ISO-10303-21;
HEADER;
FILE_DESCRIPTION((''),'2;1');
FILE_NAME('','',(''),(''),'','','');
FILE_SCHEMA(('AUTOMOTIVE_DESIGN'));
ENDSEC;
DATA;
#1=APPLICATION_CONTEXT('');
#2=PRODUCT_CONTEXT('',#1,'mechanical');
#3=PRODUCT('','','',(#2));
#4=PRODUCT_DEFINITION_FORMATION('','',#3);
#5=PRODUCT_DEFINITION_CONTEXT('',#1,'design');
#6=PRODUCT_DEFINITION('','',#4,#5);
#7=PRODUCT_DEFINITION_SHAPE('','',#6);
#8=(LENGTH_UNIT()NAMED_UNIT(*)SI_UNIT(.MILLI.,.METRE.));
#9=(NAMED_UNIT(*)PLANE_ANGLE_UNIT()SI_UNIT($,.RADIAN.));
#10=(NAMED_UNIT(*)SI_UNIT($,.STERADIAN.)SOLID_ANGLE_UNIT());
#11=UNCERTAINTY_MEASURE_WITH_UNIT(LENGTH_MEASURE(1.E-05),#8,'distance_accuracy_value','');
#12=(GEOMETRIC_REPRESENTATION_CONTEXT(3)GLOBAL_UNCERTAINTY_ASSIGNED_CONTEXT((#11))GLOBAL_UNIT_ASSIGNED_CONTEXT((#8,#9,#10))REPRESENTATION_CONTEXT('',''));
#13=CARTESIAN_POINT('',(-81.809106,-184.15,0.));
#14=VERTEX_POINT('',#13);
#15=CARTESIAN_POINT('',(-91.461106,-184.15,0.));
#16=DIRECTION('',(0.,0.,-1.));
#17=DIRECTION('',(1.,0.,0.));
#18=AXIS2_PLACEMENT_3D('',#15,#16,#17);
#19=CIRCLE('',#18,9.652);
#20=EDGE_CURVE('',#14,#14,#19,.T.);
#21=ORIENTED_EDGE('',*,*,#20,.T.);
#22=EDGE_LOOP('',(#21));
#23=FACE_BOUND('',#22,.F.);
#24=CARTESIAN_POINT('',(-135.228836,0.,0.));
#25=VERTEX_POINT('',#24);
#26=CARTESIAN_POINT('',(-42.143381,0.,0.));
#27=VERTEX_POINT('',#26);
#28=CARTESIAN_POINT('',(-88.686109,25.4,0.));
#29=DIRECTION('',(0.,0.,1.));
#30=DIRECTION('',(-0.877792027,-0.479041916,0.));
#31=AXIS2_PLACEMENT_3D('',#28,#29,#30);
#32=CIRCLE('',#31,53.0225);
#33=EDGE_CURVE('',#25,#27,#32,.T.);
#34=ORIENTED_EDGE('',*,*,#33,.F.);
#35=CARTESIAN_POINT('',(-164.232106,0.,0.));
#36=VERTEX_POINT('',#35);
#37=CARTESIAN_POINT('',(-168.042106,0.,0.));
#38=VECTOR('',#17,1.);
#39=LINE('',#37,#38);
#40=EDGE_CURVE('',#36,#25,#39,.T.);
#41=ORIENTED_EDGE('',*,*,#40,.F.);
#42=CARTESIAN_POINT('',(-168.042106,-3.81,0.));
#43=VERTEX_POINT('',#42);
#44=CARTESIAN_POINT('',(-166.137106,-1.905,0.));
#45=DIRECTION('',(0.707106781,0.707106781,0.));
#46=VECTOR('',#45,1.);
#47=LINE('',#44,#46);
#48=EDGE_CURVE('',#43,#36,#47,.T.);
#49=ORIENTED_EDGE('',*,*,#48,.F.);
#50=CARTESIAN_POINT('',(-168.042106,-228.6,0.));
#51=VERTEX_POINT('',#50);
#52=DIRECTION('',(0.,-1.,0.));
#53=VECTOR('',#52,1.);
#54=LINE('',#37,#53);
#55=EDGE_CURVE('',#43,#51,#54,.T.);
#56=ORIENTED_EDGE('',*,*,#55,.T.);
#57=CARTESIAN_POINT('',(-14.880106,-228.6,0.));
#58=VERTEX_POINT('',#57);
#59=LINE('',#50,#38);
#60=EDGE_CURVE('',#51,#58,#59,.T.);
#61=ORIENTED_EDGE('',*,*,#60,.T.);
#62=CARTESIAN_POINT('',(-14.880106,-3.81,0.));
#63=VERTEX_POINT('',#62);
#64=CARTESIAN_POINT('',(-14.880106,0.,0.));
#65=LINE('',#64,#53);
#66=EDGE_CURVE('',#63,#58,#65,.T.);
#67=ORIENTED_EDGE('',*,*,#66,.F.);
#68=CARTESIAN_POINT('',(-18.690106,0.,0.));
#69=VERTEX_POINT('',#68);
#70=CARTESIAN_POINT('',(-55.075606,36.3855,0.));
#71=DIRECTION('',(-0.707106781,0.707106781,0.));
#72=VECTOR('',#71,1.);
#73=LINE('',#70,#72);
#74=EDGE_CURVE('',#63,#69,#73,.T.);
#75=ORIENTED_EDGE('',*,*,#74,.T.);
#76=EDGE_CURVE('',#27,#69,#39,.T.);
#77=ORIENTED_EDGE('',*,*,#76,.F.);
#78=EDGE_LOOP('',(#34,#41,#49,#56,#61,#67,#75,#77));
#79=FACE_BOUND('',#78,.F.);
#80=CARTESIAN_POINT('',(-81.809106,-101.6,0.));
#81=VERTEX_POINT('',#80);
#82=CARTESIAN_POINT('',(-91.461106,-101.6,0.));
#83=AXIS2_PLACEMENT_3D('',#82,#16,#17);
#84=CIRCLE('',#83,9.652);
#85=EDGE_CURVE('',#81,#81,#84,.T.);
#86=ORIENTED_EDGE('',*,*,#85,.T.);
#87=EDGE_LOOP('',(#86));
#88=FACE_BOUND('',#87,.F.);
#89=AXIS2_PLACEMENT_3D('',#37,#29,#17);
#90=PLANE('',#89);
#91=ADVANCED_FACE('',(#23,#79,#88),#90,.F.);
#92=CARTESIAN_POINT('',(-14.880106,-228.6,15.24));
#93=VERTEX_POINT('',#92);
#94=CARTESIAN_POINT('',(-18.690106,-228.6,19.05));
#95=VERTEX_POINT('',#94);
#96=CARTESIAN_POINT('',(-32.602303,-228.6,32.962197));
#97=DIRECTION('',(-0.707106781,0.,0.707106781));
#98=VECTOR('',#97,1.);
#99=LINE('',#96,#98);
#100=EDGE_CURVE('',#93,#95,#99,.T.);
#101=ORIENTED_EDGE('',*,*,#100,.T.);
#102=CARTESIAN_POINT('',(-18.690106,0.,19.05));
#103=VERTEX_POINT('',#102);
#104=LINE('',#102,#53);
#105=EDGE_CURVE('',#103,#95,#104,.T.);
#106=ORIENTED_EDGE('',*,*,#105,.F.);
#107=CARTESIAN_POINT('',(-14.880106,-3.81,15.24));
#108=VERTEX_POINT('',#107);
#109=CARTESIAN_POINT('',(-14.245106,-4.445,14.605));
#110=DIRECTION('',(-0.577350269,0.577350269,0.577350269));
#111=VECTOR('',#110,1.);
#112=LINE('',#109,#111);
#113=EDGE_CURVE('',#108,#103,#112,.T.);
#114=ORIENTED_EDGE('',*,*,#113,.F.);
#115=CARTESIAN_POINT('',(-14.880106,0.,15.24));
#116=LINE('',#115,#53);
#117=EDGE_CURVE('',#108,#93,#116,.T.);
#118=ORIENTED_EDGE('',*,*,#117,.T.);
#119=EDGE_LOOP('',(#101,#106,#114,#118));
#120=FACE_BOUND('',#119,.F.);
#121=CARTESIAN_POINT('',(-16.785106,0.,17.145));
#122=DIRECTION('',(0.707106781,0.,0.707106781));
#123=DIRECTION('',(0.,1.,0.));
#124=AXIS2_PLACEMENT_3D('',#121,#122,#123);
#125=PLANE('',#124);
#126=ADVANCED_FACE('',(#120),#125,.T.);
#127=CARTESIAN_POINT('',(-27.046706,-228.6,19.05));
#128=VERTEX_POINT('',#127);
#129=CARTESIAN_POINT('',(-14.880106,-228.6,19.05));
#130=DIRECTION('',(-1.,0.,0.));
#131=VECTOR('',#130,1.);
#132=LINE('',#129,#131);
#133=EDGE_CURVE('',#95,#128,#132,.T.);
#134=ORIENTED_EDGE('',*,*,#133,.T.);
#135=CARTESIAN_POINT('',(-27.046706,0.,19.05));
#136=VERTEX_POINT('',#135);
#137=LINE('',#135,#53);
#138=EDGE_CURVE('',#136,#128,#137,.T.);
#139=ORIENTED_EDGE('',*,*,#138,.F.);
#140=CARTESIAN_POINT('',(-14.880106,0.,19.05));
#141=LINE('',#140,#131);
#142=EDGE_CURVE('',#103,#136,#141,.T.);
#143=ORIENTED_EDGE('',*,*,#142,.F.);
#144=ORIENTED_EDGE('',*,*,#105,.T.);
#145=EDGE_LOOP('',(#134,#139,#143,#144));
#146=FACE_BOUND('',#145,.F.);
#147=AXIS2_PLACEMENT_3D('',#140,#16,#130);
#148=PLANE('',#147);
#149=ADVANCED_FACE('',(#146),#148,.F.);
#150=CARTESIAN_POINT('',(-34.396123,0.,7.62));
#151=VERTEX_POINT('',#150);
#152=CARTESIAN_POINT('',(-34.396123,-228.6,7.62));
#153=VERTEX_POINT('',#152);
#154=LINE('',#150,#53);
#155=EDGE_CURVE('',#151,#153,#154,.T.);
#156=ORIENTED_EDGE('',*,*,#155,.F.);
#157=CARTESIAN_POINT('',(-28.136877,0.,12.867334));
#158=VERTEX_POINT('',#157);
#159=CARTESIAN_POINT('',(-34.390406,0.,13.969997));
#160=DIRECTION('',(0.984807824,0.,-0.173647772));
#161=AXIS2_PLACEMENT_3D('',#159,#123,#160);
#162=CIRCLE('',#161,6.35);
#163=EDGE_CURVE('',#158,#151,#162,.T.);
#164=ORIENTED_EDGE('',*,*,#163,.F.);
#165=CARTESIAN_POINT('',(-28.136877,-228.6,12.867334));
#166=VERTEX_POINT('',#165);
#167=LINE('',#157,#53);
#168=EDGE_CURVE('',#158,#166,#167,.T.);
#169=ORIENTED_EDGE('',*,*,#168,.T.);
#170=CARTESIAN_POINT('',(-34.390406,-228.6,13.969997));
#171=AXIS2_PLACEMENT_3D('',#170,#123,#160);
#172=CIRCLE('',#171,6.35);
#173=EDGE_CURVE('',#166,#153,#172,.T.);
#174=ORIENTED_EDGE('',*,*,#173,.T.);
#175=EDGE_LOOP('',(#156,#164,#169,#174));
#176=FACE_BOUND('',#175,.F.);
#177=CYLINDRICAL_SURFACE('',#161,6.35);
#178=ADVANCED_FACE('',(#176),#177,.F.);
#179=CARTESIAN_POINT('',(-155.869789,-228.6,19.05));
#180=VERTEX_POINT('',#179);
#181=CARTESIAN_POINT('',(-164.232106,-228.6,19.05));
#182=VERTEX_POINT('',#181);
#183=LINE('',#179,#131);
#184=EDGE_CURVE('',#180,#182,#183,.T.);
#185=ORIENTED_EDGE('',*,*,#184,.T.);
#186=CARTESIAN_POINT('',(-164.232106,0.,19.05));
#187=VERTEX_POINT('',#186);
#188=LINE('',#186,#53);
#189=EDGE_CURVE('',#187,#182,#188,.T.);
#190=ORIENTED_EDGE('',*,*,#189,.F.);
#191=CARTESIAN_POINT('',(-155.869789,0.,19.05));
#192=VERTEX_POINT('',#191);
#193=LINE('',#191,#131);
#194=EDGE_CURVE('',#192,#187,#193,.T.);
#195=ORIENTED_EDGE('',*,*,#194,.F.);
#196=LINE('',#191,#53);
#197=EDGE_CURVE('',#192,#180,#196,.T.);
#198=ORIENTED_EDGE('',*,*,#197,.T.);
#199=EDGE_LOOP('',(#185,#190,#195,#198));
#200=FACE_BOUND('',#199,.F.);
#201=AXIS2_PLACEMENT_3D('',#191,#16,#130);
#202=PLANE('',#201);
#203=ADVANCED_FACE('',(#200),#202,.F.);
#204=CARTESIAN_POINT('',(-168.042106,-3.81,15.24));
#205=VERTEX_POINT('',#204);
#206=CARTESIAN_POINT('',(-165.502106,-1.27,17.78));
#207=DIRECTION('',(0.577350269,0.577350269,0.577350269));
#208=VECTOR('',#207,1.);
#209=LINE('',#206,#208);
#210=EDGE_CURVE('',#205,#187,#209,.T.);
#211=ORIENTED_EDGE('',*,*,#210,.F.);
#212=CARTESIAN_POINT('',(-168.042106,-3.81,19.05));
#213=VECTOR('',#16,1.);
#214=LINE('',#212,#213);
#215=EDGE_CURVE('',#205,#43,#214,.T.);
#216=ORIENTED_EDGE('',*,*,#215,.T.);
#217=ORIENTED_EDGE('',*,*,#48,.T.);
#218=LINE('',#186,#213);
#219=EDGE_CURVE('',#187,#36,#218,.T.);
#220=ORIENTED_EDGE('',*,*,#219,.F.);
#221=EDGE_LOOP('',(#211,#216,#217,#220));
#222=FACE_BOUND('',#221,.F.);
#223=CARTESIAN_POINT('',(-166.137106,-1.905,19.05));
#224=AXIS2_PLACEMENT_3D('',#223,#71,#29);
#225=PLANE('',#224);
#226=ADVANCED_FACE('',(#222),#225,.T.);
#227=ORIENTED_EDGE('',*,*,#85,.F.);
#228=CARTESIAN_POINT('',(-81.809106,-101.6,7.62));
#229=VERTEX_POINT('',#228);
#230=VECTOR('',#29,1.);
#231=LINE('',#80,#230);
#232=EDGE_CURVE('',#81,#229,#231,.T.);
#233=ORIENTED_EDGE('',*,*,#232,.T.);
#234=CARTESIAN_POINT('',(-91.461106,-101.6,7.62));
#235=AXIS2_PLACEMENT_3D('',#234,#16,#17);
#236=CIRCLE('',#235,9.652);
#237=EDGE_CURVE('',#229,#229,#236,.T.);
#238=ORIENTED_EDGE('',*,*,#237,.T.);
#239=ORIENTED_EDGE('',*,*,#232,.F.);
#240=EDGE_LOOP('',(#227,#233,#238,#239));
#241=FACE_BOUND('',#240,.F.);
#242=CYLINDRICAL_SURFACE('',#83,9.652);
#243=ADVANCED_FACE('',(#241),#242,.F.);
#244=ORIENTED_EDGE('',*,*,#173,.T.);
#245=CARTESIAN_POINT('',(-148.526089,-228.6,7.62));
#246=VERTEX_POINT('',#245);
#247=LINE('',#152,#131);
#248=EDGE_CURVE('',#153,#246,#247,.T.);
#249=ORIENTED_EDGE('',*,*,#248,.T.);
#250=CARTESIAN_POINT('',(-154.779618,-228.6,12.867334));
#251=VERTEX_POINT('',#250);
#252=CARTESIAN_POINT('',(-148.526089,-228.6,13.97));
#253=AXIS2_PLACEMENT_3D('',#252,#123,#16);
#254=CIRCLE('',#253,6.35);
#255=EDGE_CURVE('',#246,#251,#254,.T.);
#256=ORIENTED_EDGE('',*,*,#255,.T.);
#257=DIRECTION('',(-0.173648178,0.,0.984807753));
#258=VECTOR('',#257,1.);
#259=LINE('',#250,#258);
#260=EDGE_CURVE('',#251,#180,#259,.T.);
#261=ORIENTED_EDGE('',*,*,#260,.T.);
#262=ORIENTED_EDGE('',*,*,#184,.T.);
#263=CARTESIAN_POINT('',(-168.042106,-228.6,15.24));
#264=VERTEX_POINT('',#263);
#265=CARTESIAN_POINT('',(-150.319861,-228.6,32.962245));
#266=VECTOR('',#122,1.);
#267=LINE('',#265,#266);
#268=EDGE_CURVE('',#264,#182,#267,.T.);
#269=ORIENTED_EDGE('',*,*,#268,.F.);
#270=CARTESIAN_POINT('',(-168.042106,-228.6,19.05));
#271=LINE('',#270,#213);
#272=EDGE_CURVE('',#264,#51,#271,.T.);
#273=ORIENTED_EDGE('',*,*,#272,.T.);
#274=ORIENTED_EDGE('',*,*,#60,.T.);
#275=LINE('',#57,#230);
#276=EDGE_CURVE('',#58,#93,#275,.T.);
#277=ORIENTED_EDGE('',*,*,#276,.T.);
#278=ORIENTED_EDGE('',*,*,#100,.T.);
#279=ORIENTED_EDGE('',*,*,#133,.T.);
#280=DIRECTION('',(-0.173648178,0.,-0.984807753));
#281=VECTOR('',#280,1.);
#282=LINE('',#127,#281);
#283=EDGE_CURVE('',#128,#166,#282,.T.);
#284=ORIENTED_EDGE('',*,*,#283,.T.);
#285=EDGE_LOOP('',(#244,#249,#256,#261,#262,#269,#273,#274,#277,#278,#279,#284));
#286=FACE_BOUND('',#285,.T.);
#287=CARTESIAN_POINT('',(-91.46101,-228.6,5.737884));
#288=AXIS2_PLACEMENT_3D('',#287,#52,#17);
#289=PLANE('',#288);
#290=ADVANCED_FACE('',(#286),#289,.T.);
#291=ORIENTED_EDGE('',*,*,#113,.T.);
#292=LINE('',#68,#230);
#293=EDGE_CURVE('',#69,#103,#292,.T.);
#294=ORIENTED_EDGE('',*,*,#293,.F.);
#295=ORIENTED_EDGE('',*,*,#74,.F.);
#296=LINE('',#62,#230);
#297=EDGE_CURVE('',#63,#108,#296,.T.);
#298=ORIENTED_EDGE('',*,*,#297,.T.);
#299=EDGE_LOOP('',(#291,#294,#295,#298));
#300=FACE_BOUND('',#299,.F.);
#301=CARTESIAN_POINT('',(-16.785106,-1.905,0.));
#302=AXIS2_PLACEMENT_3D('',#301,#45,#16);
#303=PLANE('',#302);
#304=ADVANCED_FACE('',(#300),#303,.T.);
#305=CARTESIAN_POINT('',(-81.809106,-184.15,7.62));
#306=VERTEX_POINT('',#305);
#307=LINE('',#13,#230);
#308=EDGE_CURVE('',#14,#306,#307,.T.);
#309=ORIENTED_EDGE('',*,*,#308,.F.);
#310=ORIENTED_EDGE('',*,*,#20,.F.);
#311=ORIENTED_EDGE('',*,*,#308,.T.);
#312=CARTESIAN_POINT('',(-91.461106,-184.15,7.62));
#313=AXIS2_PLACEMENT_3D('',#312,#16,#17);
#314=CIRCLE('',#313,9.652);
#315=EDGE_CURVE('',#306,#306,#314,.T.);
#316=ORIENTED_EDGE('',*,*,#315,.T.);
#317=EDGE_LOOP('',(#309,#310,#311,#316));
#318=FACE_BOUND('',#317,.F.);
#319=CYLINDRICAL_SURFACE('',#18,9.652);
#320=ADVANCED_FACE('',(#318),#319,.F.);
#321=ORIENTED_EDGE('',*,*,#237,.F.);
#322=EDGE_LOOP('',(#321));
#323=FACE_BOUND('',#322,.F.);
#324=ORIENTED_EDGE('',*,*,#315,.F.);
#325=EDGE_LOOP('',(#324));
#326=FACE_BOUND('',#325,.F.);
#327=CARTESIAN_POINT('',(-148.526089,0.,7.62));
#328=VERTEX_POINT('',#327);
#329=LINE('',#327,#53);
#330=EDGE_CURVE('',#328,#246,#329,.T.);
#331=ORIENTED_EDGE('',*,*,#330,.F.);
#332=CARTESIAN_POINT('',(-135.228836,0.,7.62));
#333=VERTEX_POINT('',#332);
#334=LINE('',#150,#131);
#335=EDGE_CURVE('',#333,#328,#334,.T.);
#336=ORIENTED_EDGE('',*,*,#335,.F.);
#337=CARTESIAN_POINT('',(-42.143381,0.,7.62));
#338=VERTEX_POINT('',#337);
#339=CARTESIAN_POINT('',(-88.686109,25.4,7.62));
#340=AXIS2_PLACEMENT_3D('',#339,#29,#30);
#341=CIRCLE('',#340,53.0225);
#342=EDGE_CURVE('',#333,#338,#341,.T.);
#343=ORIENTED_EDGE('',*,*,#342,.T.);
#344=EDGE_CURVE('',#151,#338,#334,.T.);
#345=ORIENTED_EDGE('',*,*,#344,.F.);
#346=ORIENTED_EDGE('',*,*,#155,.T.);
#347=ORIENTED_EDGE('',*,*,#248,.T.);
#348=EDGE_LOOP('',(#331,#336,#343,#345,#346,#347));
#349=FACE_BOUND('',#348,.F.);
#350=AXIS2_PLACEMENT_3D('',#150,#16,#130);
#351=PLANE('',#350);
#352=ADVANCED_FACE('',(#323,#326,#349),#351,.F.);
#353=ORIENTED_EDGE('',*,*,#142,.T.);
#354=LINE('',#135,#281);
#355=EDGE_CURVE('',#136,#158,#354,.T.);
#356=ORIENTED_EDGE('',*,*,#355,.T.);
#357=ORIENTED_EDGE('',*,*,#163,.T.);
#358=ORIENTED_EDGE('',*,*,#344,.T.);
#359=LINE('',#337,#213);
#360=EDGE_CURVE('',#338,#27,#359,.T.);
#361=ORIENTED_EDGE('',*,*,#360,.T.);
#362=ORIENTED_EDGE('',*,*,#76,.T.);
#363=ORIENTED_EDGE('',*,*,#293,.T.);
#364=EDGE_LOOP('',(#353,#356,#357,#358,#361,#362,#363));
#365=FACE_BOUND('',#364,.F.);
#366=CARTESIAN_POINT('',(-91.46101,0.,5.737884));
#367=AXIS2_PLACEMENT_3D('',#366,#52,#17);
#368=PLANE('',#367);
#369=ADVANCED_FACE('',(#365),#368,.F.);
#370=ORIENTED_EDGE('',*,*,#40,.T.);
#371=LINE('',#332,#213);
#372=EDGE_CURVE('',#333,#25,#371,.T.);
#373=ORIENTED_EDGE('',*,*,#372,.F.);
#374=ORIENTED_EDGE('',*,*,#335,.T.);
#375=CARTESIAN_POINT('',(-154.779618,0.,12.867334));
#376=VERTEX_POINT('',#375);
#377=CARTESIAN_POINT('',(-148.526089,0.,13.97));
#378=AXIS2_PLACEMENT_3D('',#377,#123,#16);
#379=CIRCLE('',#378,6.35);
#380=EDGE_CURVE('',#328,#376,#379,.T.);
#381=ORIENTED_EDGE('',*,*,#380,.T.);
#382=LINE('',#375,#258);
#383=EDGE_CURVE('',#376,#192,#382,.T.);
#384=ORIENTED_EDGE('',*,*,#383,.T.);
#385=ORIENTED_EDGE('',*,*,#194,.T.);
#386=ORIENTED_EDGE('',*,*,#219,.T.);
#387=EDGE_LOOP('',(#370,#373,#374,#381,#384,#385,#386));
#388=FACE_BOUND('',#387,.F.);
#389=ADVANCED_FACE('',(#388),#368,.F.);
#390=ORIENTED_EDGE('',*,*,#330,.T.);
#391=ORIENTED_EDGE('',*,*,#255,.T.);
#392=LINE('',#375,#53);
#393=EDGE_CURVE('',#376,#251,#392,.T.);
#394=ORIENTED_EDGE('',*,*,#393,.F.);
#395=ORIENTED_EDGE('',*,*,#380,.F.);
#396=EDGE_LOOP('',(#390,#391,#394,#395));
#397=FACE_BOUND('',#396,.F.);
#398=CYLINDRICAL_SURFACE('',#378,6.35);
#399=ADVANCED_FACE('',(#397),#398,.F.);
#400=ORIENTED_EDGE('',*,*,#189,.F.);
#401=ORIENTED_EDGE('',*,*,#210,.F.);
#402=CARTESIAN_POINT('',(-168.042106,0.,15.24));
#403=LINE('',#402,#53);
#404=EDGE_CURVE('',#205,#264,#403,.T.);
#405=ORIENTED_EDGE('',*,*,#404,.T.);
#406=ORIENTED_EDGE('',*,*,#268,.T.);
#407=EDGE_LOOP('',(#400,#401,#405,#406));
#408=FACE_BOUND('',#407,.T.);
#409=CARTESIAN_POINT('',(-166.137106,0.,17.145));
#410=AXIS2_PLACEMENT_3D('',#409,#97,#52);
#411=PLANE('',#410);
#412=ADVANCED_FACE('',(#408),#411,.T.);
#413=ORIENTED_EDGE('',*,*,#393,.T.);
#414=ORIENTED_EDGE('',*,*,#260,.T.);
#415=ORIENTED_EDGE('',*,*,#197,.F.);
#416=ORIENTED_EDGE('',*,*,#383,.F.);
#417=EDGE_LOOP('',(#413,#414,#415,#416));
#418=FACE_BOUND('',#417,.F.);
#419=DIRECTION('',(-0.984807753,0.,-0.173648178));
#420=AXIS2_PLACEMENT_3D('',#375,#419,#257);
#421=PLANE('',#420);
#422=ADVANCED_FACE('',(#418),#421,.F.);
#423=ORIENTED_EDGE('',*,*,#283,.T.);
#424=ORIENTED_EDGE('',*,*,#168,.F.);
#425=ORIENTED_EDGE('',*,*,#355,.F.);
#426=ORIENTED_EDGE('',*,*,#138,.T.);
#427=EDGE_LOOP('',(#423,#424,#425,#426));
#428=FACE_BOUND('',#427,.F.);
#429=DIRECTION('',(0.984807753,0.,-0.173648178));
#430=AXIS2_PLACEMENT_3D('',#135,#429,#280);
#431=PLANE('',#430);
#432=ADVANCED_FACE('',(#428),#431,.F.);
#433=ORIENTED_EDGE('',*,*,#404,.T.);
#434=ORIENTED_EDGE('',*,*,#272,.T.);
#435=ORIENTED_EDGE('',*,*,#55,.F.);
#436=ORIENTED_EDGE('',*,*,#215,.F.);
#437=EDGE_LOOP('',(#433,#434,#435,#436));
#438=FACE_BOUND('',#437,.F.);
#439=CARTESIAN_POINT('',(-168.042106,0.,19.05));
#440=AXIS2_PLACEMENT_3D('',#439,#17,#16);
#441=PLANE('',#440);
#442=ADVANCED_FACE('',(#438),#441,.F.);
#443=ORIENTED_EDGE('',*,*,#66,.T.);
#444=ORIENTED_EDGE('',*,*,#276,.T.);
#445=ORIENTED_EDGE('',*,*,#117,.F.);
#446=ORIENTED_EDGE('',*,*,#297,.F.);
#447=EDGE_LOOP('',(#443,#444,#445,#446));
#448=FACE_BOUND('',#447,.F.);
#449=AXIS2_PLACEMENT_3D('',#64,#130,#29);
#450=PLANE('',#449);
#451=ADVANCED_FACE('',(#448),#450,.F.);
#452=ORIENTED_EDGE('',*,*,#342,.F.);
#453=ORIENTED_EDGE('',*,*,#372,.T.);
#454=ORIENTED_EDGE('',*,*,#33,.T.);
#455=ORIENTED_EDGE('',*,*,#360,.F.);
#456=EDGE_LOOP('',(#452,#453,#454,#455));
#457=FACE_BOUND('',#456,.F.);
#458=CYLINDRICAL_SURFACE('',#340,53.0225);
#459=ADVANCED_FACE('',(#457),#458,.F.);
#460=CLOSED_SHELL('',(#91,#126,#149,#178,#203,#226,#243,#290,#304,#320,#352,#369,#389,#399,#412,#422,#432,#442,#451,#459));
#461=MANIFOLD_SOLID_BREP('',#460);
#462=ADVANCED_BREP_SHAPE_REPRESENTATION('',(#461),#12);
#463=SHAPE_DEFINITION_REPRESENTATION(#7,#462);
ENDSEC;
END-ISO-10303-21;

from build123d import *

# Parameters (mm, degrees)
F1_DEPTH = 228.6
F2_SIZE  = 3.81
F4_DEPTH = 25.4
F5_R     = 9.652
F6_DEPTH = 25.4


# Not quite as in the source:
# - a feature names something its author has since deleted; it is built from what else it names


with BuildPart() as f1:
    # F0 (on Front) → F1 (new body)
    with BuildSketch(Plane.XZ):
        with BuildLine():
            Line((-168.0421057219, 19.05), (-168.0421057219, 0))
            Line((-168.0421057219, 0), (-14.8801057219, 0))
            Line((-14.8801057219, 0), (-14.8801057219, 19.05))
            Line((-14.8801057219, 19.05), (-27.0467057219, 19.05))
            Line((-27.0467057219, 19.05), (-28.1368765378, 12.8673340718))
            ThreePointArc((-28.1368765378, 12.8673340718), (-30.3108938413, 9.1037793136), (-34.3961226724, 7.62))
            Line((-34.3961226724, 7.62), (-91.4611057219, 7.62))
            Line((-91.4611057219, 7.62), (-148.5260887714, 7.62))
            ThreePointArc((-148.5260887714, 7.62), (-152.6077900929, 9.1056177862), (-154.7796180031, 12.8673340718))
            Line((-154.7796180031, 12.8673340718), (-155.8697888189, 19.05))
            Line((-155.8697888189, 19.05), (-168.0421057219, 19.05))
        make_face()
    extrude(amount=F1_DEPTH)

    # F2
    f2_edges = [f1.edges().sort_by_distance(p)[0] for p in [
        (-168.042106, -114.3, 19.05),
        (-14.880106, -114.3, 19.05),
        (-14.880106, 0, 9.525),
        (-168.042106, 0, 9.525),
    ]]
    chamfer(f2_edges, length=F2_SIZE)

    # F3 (on face) → F4 (cut)
    with BuildSketch(Plane.XY.offset(7.62)):
        with BuildLine():
            Line((-42.1433808409, 0), (-135.2288363374, 0))
            ThreePointArc((-135.2288363374, 0), (-88.6861085892, -27.6225), (-42.1433808409, 0))
        make_face()
    extrude(amount=-F4_DEPTH, mode=Mode.SUBTRACT)

    # F5 (on face) → F6 (cut)
    with BuildSketch(Plane(origin=(0, 0, 0), x_dir=(1, 0, 0), z_dir=(0, 0, -1))):
        with Locations((-91.4611057219, 101.6)):
            Circle(F5_R)
        with Locations((-91.4611057219, 184.15)):
            Circle(F5_R)
    extrude(amount=-F6_DEPTH, mode=Mode.SUBTRACT)


solid = f1.part
